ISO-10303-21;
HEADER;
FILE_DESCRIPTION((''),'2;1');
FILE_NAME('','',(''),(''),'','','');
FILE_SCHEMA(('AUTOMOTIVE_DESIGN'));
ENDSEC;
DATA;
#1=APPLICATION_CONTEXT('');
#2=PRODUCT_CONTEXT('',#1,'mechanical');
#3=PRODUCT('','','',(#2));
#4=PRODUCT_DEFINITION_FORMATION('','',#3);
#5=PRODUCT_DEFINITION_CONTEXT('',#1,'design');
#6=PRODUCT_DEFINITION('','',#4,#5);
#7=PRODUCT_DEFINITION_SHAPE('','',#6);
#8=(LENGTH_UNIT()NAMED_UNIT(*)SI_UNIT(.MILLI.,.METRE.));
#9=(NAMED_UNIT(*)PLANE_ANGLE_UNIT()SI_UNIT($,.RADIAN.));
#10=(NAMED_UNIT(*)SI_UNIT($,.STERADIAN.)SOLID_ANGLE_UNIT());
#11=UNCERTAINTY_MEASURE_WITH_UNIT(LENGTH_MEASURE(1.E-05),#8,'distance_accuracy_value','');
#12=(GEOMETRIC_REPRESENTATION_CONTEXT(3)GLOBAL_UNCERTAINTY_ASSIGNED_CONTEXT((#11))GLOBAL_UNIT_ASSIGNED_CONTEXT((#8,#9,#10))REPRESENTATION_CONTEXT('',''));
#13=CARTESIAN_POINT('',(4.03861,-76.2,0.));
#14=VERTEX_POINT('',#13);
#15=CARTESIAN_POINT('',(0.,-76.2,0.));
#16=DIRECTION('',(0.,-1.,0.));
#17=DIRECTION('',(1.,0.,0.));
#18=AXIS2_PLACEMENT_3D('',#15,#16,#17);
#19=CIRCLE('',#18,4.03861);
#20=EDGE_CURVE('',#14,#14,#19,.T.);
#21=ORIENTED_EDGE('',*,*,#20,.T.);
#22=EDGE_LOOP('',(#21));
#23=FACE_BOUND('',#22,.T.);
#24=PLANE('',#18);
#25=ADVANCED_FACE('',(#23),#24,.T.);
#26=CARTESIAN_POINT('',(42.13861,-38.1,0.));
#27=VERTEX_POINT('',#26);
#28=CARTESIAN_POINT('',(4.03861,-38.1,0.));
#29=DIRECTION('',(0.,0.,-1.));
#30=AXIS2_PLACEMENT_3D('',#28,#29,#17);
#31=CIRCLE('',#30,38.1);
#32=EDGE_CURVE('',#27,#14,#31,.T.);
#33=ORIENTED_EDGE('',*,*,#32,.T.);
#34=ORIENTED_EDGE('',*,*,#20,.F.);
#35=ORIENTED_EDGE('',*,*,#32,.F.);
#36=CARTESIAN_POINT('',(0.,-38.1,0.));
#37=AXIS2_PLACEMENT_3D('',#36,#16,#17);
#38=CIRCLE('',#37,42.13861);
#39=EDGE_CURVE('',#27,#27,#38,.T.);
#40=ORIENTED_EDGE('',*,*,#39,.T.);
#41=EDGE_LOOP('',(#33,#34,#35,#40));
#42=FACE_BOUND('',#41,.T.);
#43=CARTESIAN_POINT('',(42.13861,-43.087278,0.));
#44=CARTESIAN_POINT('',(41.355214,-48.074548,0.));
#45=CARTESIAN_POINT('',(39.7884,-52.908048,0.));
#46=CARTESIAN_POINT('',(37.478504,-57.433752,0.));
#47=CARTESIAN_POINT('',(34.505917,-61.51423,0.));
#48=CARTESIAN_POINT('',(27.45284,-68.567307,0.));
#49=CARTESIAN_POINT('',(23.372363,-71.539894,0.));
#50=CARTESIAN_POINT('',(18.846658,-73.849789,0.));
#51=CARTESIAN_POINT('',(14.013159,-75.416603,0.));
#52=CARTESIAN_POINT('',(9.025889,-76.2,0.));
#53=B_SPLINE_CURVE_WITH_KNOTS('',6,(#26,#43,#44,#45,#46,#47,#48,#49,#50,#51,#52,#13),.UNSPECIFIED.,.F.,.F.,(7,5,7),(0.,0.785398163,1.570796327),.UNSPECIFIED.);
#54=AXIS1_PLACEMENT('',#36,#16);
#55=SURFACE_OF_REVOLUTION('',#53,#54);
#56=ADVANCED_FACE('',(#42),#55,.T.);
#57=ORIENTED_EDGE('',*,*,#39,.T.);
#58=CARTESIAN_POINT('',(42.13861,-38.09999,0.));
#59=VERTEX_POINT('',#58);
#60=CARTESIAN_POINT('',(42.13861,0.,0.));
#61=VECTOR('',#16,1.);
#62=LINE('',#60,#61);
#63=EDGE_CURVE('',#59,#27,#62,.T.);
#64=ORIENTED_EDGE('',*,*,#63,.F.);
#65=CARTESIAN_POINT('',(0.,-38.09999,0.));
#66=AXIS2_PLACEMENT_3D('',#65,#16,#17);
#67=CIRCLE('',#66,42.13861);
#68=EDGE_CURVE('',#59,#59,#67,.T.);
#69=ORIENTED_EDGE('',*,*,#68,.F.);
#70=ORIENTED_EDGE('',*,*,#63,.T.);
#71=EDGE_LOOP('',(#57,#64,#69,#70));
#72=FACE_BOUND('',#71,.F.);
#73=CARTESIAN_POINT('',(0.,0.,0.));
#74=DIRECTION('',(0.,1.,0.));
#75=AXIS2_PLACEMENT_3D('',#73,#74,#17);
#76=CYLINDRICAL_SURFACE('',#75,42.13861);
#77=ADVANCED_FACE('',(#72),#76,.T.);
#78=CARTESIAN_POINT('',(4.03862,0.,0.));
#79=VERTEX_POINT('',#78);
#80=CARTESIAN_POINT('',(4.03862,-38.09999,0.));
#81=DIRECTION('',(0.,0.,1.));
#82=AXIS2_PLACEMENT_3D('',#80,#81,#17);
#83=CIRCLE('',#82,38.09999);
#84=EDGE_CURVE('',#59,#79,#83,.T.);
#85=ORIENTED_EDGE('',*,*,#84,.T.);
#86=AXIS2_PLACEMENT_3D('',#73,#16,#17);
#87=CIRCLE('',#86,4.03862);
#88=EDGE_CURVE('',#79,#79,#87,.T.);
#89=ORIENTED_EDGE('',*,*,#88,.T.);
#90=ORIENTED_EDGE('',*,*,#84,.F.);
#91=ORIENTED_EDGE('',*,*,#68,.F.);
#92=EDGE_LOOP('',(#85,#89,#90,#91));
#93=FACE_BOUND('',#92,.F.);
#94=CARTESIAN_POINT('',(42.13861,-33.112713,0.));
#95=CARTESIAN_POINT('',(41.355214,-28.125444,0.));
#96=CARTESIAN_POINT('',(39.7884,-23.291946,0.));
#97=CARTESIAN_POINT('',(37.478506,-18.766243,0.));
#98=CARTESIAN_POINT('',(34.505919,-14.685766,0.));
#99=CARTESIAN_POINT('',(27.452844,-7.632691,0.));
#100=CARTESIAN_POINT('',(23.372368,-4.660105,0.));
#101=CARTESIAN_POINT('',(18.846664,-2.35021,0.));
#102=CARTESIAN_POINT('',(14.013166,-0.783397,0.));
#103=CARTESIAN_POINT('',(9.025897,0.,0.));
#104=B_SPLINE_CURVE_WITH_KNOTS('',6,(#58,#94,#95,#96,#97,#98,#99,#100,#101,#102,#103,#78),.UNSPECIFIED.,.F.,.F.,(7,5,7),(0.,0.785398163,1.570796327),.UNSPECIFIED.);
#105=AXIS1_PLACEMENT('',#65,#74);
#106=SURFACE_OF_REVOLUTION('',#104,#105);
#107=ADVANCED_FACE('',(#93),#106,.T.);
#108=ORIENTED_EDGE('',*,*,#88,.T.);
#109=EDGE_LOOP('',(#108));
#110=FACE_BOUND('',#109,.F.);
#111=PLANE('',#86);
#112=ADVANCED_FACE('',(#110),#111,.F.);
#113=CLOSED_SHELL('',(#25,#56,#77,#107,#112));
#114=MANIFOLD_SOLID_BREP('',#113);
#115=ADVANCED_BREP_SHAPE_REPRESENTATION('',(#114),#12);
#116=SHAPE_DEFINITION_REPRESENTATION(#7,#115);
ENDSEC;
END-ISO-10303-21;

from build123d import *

# Parameters (mm, degrees)
F0_R     = 42.1386103745
F1_DEPTH = 76.2
F2_R     = 38.1
F3_R     = 38.09999


# Not quite as in the source:
# - a fillet or chamfer is up to 0.001 mm smaller than in the source, because OpenCascade refuses the exact size


with BuildPart() as f1:
    # F0 (on Front) → F1 (new body)
    with BuildSketch(Plane.XZ):
        Circle(F0_R)
    extrude(amount=F1_DEPTH)

    # F2
    f2_edges = [f1.edges().sort_by_distance(p)[0] for p in [
        (-42.13861, -76.2, 0),
    ]]
    fillet(f2_edges, radius=F2_R)

    # F3 (radius 38.1 in the source; OpenCascade refuses exactly that, so slightly less here)
    f3_edges = [f1.edges().sort_by_distance(p)[0] for p in [
        (42.13861, -19.05, 0),
        (-42.13861, -38.1, 0),
        (-42.13861, 0, 0),
    ]]
    fillet(f3_edges, radius=F3_R)


solid = f1.part
